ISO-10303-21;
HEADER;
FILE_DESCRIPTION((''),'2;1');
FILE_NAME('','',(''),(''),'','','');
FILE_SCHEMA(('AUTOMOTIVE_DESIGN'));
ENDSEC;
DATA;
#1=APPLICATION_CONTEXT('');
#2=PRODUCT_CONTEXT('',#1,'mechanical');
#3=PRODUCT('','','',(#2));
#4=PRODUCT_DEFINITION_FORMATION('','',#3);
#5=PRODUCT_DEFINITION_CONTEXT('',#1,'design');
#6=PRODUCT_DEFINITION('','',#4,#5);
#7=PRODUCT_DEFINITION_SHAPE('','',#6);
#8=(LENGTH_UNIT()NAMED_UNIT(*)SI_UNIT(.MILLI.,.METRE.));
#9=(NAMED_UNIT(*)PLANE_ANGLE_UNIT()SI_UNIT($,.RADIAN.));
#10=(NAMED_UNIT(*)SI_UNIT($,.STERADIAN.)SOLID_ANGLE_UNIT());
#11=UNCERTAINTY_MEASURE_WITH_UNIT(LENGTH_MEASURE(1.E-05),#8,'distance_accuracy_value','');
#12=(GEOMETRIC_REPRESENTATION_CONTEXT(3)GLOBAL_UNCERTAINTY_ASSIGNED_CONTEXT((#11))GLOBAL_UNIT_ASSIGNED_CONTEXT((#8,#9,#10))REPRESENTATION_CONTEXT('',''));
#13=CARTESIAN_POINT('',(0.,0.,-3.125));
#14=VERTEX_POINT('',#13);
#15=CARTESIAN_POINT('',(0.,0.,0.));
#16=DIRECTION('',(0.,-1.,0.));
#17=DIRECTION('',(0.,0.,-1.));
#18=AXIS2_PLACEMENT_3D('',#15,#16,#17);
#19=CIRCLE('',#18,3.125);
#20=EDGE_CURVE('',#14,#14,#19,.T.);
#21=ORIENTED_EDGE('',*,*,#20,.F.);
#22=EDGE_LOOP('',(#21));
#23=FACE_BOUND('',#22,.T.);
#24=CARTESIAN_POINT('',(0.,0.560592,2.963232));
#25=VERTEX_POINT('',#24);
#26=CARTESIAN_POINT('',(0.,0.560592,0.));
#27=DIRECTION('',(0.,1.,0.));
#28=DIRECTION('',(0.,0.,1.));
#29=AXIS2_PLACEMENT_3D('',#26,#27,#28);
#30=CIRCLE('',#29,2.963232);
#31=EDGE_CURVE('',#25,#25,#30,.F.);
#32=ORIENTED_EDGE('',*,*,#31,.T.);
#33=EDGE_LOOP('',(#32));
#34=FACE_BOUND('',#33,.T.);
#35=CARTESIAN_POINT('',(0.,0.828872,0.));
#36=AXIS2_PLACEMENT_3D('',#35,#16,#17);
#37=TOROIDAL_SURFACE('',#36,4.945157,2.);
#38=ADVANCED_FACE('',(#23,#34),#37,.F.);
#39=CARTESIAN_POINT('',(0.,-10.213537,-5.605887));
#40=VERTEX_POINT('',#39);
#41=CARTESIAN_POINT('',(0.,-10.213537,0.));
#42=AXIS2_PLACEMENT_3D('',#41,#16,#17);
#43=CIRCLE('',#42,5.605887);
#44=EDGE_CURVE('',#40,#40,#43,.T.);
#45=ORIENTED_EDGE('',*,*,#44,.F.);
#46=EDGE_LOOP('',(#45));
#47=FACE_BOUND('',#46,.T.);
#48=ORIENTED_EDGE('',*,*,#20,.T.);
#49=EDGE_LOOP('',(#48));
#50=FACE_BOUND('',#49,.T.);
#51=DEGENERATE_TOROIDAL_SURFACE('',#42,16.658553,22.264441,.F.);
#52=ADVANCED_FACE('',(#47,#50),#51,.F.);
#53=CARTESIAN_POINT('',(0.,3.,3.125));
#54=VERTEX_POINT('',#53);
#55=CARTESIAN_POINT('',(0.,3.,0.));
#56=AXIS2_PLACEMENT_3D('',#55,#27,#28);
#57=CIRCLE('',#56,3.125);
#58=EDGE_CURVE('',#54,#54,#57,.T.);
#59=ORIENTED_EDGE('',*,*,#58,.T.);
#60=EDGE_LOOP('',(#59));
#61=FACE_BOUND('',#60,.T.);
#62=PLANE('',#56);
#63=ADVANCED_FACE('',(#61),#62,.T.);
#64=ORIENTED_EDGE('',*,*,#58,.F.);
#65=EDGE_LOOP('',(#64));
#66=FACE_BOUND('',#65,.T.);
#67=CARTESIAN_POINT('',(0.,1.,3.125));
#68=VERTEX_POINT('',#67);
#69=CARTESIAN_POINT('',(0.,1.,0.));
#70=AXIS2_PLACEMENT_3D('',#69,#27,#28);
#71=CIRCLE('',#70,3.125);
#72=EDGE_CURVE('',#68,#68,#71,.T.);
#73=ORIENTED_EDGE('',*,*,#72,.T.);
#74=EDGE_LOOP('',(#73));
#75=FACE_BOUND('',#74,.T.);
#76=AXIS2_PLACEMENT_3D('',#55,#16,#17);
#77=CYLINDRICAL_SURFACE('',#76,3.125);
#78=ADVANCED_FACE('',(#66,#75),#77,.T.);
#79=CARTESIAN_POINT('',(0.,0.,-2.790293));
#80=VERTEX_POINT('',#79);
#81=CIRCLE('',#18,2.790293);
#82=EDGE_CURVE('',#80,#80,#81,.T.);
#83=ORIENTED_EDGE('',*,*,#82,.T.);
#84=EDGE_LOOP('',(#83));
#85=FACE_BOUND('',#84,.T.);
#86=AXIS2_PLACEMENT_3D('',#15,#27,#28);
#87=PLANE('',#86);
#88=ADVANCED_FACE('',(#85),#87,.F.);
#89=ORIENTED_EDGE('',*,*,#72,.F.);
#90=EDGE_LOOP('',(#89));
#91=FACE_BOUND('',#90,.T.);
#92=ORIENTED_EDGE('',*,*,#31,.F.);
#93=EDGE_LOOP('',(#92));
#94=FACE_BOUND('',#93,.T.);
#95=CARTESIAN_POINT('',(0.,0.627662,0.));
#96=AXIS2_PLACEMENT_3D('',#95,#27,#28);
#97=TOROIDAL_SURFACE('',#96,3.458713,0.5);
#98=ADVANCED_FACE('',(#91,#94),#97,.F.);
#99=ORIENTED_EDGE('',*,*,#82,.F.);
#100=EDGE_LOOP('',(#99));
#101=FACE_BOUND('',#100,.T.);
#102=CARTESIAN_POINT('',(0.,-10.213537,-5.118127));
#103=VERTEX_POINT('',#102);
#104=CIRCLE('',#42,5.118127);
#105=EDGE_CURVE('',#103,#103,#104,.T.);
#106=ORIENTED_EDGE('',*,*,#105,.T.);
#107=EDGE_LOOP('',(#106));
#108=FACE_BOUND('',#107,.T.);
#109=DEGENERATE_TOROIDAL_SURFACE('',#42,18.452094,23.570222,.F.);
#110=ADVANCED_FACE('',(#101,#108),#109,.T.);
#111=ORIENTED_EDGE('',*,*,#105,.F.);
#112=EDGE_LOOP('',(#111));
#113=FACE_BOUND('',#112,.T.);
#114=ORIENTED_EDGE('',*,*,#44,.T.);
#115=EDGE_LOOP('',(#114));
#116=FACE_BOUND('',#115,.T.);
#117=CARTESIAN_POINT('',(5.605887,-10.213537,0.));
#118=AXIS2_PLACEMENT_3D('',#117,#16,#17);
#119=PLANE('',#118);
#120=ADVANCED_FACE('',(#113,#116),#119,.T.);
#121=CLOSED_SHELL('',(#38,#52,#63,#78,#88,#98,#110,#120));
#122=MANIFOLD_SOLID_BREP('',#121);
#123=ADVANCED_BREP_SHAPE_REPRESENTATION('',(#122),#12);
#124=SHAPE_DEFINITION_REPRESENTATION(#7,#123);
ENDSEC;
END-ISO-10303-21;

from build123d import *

# Parameters (mm, degrees)
SKETCH2_R           = 2.945157041
BOSS_EXTRUDE1_DEPTH = 1
SKETCH3_R           = 3.125
BOSS_EXTRUDE2_DEPTH = 2
FILLET1_R           = 2
FILLET2_R           = 0.5


with BuildPart() as part:
    # Sketch1 → Revolve1 (revolve)
    with BuildSketch(Plane.XY, mode=Mode.PRIVATE) as revolve1_sk:
        with BuildLine():
            Line((2.790292922, 0), (3.125, 0))
            ThreePointArc((3.125, 0), (4.976777415, -4.958274435), (5.60588742, -10.213537089))
            Line((5.60588742, -10.213537089), (5.11812749, -10.213537089))
            ThreePointArc((5.11812749, -10.213537089), (4.52880139, -4.97580968), (2.790292922, 0))
        make_face()
    revolve(revolve1_sk.sketch.rotate(Axis((0, -10.213537089, 0), (0, 1, 0)), 90), axis=Axis((0, -10.213537089, 0), (0, 1, 0)))

    # Sketch2 → Boss-Extrude1 (add)
    with BuildSketch(Plane(origin=(0, 0, 0), x_dir=(1, 0, 0), z_dir=(0, 1, 0))):
        with Locations(Location((0, 0, 0), (0, 0, 270))):
            Circle(SKETCH2_R)
    extrude(amount=BOSS_EXTRUDE1_DEPTH)

    # Sketch3 → Boss-Extrude2 (add)
    with BuildSketch(Plane(origin=(0, 1, 0), x_dir=(1, 0, 0), z_dir=(0, 1, 0))):
        with Locations(Location((0, 0, 0), (0, 0, 270))):
            Circle(SKETCH3_R)
    extrude(amount=BOSS_EXTRUDE2_DEPTH)

    # Fillet1
    # the kernel refuses this fillet: 2 mm, written as the material it adds along each edge
    with BuildSketch(Plane(origin=(0, 0, 0), x_dir=(0, 0, 1), z_dir=(-1, 0, 0))) as fillet1_piece_1:
        with BuildLine():
            CenterArc((4.945157041, 0.828871731), FILLET1_R, 180, 24.483795265)
            Line((3.125, 0), (2.945157041, 0))
            Line((2.945157041, 0), (2.945157041, 0.828871731))
        make_face()
    revolve(axis=Axis((0, 0, 0), (0, 1, 0)))

    # Fillet2
    # the kernel refuses this fillet: 0.5 mm, written as the material it adds along each edge
    with BuildSketch(Plane(origin=(0, 1, 0), x_dir=(0, 0, 1), z_dir=(-1, 0, 0))) as fillet2_piece_1:
        with BuildLine():
            CenterArc((3.458713381, -0.372337723), FILLET2_R, 131.868770298, 55.840101838)
            Line((3.125, 0), (3.091628662, 0.037233772))
            ThreePointArc((3.091628662, 0.037233772), (3.035078521, 0.05), (2.945157041, 0.05))
            Line((2.945157041, 0.05), (2.895157041, 0))
            ThreePointArc((2.895157041, 0), (2.895157041, -0.171128269), (2.913684038, -0.446114522))
            Line((2.913684038, -0.446114522), (2.96323216, -0.43940754))
        make_face()
    revolve(axis=Axis((0, 1, 0), (0, 1, 0)))


solid = part.part
